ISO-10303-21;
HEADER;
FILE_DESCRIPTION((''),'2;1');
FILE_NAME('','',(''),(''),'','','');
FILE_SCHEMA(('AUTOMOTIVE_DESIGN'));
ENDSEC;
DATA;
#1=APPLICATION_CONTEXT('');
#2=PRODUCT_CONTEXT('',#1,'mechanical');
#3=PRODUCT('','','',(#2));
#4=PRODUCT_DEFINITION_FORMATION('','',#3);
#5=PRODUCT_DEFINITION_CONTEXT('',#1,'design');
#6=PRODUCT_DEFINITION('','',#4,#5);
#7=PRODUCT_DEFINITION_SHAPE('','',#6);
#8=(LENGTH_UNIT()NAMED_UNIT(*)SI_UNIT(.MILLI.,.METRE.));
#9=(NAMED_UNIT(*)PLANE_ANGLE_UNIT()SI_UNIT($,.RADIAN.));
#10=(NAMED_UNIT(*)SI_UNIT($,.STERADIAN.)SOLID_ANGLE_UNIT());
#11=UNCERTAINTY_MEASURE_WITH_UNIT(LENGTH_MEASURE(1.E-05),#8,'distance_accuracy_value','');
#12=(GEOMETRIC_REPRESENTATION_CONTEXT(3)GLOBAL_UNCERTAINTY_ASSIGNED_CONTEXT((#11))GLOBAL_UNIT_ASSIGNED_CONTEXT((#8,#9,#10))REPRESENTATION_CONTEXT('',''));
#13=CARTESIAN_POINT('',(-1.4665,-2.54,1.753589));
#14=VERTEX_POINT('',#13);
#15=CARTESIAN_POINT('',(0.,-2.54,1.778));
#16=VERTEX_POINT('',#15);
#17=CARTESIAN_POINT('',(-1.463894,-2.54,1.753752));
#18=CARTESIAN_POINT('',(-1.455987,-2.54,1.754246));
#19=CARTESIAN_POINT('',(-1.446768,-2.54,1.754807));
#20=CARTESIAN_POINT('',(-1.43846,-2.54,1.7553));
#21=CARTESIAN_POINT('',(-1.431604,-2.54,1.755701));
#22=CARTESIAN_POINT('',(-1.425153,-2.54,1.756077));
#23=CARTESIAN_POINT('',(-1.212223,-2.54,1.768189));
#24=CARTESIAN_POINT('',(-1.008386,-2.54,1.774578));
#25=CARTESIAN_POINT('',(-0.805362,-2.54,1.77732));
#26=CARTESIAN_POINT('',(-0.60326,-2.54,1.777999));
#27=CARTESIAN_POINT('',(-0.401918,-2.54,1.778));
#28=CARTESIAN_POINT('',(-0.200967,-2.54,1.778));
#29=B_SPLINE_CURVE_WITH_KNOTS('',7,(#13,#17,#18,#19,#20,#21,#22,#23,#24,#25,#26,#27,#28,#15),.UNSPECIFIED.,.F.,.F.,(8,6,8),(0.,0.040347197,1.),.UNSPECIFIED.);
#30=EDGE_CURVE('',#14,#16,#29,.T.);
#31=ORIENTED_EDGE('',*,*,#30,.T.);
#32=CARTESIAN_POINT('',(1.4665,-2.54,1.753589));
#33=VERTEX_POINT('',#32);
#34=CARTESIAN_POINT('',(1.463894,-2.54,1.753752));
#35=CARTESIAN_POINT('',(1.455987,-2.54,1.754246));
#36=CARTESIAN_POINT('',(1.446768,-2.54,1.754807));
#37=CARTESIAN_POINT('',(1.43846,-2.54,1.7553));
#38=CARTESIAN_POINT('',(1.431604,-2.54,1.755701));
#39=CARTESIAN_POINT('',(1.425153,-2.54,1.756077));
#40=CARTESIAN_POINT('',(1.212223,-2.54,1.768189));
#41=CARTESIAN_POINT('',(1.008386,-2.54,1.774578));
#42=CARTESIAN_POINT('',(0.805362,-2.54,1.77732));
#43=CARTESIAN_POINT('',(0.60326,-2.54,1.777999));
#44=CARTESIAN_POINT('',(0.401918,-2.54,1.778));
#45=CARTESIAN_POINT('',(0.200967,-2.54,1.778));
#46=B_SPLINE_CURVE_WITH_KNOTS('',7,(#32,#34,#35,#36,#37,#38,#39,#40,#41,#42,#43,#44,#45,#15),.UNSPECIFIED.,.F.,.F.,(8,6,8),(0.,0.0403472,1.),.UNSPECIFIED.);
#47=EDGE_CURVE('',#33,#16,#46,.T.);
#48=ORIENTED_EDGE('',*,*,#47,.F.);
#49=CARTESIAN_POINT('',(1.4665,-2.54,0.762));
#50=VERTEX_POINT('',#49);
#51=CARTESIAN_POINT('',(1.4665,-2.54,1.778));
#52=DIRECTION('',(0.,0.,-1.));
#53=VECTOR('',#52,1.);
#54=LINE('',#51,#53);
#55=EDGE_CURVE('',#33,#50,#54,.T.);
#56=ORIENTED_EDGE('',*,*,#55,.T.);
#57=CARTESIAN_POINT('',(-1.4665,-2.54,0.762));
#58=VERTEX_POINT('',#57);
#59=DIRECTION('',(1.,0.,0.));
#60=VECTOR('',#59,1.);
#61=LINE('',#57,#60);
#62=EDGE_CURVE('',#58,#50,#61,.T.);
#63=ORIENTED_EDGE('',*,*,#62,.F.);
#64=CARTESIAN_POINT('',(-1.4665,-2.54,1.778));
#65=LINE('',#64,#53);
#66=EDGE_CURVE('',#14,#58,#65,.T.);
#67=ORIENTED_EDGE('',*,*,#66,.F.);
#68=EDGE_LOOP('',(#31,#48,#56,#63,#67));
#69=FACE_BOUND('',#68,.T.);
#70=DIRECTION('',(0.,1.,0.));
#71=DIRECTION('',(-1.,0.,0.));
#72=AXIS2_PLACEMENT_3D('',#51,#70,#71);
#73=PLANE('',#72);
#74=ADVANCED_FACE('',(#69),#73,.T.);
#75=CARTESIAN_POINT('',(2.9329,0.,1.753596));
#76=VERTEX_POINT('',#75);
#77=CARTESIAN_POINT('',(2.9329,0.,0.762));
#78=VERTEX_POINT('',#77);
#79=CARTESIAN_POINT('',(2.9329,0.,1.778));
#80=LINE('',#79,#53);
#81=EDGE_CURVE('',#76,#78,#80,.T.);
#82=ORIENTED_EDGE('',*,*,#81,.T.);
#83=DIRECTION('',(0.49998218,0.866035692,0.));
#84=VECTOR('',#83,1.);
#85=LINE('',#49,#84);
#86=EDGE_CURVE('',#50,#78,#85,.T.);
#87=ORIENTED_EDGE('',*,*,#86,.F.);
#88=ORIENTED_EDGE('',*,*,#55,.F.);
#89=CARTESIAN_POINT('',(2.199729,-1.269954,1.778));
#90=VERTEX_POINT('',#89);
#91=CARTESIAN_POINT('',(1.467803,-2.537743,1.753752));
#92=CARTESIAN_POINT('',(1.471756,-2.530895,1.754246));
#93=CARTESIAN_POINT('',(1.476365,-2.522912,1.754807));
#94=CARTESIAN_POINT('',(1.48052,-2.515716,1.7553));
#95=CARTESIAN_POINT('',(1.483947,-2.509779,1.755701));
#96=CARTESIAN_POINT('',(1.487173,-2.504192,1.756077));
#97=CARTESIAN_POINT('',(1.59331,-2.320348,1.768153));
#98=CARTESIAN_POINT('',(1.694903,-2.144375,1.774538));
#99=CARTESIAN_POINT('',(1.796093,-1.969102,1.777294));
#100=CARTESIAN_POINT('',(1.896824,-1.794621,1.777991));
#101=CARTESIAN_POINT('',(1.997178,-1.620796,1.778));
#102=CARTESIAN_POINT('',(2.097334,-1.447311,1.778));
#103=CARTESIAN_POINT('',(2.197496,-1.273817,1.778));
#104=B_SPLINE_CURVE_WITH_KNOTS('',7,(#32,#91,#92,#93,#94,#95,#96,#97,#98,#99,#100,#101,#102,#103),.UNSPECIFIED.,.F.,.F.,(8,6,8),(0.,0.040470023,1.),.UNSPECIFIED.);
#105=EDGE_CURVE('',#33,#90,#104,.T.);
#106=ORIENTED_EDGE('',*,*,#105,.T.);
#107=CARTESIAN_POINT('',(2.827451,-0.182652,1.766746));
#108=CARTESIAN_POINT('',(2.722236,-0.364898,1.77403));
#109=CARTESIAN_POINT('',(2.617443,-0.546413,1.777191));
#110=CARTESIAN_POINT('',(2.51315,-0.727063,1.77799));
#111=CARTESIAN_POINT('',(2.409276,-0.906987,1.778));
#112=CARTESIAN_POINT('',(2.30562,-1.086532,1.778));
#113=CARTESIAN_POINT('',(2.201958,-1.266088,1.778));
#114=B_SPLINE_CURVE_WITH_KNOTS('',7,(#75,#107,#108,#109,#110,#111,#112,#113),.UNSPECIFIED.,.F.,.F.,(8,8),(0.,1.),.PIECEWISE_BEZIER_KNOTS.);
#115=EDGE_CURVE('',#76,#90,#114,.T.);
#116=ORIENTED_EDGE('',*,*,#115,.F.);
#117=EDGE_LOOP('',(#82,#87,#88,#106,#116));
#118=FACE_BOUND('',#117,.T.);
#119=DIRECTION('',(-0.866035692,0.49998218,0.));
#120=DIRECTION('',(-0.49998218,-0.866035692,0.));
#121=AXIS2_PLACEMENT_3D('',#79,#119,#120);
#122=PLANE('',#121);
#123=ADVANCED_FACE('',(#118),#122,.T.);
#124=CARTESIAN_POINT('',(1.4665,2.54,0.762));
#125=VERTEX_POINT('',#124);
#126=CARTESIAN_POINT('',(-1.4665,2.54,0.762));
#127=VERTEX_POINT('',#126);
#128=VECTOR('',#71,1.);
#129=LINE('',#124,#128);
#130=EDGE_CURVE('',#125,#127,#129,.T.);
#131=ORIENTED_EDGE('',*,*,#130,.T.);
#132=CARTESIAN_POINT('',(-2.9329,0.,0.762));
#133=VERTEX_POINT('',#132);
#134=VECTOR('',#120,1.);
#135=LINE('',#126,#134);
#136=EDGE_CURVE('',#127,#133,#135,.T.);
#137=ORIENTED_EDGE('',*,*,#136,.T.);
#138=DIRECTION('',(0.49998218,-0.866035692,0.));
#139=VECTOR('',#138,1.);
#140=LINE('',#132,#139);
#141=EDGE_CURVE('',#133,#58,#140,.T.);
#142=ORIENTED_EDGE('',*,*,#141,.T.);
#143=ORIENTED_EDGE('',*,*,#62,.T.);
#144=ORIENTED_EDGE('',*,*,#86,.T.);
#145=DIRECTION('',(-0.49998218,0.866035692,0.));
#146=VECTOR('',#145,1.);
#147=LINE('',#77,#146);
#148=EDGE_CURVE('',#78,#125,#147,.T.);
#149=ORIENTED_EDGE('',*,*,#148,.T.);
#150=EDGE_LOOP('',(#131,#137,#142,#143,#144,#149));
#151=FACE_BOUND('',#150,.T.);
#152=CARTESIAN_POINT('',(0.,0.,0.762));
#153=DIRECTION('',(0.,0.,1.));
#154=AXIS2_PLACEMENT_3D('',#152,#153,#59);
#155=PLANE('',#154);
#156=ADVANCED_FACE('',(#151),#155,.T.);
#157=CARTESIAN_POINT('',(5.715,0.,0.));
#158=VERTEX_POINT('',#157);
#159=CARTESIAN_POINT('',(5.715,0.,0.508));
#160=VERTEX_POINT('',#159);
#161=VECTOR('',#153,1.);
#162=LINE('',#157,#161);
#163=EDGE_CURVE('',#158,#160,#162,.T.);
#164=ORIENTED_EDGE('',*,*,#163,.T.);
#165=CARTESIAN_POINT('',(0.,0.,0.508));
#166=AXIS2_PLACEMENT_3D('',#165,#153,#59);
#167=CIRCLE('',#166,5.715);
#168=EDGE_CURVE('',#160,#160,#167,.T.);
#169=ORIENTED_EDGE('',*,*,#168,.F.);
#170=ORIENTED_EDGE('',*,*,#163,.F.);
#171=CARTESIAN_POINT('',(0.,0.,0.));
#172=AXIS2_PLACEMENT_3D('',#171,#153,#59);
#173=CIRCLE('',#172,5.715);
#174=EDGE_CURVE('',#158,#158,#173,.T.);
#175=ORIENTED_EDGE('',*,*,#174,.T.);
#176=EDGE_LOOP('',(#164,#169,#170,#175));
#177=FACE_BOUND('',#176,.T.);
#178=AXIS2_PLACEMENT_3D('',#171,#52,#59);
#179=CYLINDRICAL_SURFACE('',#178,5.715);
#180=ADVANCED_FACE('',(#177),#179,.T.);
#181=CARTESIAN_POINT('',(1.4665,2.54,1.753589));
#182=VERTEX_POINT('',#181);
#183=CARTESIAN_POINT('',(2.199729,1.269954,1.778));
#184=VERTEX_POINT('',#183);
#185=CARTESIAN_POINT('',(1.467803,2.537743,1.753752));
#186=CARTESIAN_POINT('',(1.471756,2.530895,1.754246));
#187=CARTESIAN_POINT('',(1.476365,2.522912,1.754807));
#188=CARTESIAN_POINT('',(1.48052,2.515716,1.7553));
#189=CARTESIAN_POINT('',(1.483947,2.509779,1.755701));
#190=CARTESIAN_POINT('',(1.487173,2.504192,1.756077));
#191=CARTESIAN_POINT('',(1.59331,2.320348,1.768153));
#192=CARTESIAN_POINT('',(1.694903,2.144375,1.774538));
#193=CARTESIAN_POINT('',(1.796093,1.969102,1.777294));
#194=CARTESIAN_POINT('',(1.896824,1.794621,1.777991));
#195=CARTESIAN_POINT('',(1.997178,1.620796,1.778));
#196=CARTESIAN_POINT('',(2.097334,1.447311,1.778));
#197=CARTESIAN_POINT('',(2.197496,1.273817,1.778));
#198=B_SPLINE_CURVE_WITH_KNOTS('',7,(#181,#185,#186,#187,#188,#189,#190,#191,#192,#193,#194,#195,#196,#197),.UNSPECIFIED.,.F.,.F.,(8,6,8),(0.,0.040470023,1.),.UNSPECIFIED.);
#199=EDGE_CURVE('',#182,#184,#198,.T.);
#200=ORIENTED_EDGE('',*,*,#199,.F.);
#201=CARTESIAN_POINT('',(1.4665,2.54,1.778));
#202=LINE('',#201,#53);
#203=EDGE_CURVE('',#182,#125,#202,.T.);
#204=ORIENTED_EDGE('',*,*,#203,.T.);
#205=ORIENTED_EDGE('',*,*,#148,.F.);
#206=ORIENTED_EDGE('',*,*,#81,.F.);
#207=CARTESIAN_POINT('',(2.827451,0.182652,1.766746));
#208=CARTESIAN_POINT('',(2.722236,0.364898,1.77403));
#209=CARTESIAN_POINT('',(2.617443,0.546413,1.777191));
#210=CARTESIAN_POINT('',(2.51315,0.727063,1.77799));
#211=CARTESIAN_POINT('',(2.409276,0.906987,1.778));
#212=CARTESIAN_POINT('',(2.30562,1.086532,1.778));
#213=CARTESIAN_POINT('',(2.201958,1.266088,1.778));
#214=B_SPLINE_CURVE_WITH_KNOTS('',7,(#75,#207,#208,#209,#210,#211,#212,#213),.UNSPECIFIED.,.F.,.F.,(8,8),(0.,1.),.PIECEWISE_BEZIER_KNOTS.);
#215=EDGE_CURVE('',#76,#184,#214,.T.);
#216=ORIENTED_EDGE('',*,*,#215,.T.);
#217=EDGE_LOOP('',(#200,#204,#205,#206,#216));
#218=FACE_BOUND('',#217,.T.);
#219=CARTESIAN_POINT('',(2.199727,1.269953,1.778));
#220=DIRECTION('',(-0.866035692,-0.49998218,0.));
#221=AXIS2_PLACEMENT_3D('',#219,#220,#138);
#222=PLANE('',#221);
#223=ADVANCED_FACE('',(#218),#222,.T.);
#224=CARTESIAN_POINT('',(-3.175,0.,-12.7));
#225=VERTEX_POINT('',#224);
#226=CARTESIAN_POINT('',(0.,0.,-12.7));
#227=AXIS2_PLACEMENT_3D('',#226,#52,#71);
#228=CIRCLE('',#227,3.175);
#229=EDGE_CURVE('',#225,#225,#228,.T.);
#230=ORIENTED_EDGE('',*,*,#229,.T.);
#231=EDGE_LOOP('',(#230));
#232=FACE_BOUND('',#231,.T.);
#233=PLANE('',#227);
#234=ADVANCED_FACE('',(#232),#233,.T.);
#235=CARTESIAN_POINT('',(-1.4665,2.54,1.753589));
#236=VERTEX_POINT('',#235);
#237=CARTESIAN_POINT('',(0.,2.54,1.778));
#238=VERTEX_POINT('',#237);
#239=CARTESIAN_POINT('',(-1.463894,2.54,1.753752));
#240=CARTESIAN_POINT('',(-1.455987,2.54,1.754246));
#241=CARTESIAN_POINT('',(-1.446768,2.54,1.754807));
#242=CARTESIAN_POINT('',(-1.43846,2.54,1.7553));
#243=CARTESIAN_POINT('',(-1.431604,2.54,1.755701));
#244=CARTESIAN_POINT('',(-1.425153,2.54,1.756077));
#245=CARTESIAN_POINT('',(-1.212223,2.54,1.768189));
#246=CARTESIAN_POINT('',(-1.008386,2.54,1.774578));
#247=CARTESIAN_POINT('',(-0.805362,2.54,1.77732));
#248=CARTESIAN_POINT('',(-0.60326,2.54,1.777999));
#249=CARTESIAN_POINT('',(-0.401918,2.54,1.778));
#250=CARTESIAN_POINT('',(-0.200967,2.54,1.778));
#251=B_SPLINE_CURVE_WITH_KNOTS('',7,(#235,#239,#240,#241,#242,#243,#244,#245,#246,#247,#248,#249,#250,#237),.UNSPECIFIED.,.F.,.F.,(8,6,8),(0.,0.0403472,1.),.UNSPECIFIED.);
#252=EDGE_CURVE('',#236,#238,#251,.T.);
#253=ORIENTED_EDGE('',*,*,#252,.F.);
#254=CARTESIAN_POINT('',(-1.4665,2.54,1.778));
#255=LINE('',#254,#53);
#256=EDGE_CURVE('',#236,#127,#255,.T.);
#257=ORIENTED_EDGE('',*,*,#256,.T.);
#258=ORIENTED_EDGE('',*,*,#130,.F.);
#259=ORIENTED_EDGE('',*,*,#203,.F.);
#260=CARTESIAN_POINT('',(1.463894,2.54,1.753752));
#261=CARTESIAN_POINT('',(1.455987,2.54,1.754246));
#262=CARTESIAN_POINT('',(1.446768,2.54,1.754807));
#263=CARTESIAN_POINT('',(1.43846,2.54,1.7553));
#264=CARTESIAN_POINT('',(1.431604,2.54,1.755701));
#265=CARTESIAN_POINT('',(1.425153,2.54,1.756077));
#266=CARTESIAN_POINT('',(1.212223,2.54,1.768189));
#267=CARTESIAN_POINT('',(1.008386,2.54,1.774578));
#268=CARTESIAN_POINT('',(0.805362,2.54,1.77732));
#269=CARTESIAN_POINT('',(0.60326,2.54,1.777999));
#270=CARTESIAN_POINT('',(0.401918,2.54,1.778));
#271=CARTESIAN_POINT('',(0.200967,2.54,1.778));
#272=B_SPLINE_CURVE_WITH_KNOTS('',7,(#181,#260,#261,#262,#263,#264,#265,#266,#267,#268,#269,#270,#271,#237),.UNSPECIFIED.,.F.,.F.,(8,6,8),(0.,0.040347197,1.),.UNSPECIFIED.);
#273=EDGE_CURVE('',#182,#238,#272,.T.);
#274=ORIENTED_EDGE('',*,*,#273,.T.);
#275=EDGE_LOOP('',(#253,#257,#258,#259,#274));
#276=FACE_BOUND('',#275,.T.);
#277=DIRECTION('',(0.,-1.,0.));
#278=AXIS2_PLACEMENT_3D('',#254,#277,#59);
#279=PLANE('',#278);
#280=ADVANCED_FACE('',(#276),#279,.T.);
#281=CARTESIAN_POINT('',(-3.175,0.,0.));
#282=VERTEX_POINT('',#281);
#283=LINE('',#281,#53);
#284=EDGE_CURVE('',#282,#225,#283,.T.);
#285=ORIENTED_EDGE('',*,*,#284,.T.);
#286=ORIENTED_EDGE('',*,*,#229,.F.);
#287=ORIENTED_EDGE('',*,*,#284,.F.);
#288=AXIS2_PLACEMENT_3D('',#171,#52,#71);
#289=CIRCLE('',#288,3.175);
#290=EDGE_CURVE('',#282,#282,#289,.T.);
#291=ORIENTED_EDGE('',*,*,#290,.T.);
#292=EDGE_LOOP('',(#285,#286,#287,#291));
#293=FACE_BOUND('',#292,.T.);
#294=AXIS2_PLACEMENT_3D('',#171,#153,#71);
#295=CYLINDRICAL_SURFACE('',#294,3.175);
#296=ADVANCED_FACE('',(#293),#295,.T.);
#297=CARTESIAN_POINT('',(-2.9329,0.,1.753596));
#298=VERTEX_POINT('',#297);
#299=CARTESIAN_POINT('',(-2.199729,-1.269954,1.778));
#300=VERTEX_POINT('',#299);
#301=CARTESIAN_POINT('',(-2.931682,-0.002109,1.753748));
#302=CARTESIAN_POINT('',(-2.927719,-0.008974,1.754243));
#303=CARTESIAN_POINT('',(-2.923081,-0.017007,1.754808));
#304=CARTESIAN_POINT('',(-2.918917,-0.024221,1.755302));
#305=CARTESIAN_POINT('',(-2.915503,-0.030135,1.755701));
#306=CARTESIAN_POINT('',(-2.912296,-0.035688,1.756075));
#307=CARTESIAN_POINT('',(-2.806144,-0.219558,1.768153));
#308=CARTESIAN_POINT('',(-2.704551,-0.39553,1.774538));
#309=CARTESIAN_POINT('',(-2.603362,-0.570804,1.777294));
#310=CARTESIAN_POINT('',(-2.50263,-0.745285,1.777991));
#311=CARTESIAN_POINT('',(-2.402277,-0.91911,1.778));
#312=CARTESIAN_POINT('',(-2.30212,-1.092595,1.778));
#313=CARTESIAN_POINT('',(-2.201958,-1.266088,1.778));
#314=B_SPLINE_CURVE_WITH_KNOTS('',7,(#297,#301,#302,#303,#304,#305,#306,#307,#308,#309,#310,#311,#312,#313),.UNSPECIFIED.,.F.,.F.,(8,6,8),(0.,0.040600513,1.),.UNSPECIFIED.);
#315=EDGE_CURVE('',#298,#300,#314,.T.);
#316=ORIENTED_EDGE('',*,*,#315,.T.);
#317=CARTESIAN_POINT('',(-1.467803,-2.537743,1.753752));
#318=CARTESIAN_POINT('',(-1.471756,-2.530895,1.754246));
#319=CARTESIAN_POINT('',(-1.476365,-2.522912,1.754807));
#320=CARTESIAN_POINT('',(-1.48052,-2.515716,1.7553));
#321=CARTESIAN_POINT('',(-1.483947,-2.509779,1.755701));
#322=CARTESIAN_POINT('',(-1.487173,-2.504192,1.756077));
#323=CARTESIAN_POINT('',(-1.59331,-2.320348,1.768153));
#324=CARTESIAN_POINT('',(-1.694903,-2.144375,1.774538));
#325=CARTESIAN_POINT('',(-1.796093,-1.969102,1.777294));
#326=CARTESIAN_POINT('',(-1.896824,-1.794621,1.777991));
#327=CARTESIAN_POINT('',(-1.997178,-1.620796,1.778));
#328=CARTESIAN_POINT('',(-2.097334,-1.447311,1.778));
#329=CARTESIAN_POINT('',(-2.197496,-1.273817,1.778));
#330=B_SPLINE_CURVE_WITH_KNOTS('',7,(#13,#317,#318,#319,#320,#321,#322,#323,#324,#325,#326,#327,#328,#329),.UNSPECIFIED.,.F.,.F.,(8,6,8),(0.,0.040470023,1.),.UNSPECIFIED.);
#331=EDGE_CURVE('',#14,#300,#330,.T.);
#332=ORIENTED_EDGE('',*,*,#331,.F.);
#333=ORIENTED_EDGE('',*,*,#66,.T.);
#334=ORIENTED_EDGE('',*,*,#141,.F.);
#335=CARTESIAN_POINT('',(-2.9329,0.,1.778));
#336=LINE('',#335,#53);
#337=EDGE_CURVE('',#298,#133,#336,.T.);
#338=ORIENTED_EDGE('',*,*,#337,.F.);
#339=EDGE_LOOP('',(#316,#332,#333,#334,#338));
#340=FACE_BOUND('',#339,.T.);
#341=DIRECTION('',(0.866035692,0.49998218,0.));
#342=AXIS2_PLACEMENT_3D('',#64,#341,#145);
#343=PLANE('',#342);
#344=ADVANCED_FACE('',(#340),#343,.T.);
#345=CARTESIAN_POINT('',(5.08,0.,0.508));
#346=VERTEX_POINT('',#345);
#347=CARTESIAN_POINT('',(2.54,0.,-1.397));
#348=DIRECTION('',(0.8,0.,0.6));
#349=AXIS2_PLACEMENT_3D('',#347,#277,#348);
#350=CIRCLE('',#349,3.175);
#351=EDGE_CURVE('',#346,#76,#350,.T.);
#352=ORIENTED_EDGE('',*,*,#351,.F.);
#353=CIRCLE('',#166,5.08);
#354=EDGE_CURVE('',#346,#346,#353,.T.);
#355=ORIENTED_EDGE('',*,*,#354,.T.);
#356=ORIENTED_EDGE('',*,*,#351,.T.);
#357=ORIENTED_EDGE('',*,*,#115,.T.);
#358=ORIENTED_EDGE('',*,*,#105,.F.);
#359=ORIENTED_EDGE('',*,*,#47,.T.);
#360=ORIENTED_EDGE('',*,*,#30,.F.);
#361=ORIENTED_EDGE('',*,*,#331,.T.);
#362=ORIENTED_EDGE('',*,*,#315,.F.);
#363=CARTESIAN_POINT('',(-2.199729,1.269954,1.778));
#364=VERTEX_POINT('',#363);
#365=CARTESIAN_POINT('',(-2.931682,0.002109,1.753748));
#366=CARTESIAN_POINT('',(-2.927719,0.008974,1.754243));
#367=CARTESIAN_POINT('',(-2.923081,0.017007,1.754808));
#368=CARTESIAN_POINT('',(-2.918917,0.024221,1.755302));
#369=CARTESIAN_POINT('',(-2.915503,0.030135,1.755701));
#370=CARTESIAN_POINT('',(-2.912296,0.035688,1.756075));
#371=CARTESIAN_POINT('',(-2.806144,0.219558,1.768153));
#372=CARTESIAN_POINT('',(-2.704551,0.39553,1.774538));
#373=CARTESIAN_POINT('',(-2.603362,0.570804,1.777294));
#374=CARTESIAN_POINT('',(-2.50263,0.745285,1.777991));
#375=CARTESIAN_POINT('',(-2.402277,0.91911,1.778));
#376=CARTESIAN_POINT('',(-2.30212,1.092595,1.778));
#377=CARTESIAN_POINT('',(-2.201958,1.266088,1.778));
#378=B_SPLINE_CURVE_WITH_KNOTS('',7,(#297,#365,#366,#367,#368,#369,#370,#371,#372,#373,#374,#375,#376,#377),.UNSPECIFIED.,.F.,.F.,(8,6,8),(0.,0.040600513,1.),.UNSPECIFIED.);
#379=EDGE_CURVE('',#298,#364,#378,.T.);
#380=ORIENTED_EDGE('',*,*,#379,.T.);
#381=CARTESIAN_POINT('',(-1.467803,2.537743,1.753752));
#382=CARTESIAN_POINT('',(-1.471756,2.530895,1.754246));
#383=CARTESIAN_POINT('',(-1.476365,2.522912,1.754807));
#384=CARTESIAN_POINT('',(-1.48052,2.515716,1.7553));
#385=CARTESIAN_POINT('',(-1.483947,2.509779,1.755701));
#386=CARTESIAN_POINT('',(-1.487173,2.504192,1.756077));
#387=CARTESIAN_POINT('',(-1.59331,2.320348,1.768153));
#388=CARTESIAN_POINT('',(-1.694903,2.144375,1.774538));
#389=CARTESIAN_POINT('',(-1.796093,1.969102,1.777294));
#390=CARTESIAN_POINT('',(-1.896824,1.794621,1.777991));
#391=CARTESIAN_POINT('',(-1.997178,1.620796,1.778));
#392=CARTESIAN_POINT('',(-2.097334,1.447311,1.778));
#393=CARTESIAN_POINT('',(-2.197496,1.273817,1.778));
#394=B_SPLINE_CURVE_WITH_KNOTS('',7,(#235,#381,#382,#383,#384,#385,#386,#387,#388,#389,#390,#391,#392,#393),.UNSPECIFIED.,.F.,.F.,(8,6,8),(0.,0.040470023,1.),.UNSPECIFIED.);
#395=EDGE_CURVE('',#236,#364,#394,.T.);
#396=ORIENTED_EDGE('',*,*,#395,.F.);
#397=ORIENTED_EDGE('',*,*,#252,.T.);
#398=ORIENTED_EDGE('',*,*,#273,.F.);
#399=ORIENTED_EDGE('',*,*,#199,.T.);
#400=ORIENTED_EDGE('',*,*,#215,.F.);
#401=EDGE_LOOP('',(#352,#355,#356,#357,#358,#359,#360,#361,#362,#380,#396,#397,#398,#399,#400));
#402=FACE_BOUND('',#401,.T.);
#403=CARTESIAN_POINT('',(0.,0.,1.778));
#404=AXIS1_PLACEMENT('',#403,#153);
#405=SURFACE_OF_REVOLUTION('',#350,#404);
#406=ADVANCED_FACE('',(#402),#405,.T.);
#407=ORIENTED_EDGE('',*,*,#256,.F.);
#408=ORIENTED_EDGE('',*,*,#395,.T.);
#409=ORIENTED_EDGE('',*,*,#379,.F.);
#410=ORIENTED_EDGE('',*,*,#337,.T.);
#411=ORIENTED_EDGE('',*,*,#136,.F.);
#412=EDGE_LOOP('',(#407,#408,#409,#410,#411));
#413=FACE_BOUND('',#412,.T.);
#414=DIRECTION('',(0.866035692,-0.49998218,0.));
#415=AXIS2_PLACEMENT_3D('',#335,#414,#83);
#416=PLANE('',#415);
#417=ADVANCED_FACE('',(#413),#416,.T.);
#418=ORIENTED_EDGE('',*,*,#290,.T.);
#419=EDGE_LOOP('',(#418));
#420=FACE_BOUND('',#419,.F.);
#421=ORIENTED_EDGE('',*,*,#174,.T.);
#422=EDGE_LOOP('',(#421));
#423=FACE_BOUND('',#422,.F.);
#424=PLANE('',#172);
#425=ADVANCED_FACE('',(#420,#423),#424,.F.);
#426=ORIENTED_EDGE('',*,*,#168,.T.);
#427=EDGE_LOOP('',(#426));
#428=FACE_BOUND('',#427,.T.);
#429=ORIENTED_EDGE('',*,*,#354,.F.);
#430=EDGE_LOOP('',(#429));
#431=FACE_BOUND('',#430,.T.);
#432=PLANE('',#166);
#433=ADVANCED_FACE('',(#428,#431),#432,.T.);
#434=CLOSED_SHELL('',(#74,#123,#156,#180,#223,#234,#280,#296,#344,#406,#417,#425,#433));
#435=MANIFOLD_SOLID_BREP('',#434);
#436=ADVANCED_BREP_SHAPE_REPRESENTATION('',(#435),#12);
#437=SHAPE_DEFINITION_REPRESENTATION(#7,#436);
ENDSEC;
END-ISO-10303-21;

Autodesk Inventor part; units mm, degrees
ref_plane "YZ Plane" through (0, 0, 0) normal (1, 0, 0) x (0, 1, 0)
ref_plane "XZ Plane" through (0, 0, 0) normal (0, 1, 0) x (-1, 0, 0)
ref_plane "XY Plane" through (0, 0, 0) normal (0, 0, 1) x (1, 0, 0)
sketch "Sketch1" plane through (0, 0, 0) normal (0, 0, 1) x (1, 0, 0)
  circle A0 centre (0, 0) radius 5.715
  dimension "d0" = 11.43
extrude "Extrusion1" add sketch "Sketch1" along normal blind 0.508
sketch "Sketch2" plane through (0, 0, 0.508) normal (0, 0, 1) x (1, 0, 0)
  circle A0 centre (0, 0) radius 5.715 projected
  circle A1 centre (0, 0) radius 5.08
  dimension "d3" = 10.16
extrude "Extrusion2" add sketch "Sketch2" along normal blind 1.27 contours A1
fillet "Fillet1" radius 3.175 1 edges at (-5.08, 0, 1.778)
sketch "Sketch3" plane through (0, 0, 1.778) normal (0, 0, 1) x (1, 0, 0)
  circle A0 centre (0, 0) radius 2.54 projected
  line L0 (2.9329, 0) -> (1.4665, -2.54)
  line L1 (1.4665, -2.54) -> (-1.4665, -2.54)
  line L2 (-1.4665, -2.54) -> (-2.9329, 0)
  line L3 (-2.9329, 0) -> (-1.4665, 2.54)
  line L4 (-1.4665, 2.54) -> (1.4665, 2.54)
  line L5 (1.4665, 2.54) -> (2.9329, 0)
  dimension "d7" = 2.54
extrude "Extrusion3" cut sketch "Sketch3" against normal blind 1.016
sketch "Sketch4" plane through (0, 0, 0) normal (0, 0, -1) x (-1, 0, 0)
  circle A0 centre (0, 0) radius 5.715 projected
  circle A1 centre (0, 0) radius 3.175
  dimension "d10" = 6.35
extrude "Extrusion4" add sketch "Sketch4" along normal blind 12.7 contours A1
thread "Thread1" size "1/4-20 UNC" class "2A" standard "ANSI Unified Screw Threads" full length
properties part number "8020_10series_0.5in_0.25-20_capscrews"
